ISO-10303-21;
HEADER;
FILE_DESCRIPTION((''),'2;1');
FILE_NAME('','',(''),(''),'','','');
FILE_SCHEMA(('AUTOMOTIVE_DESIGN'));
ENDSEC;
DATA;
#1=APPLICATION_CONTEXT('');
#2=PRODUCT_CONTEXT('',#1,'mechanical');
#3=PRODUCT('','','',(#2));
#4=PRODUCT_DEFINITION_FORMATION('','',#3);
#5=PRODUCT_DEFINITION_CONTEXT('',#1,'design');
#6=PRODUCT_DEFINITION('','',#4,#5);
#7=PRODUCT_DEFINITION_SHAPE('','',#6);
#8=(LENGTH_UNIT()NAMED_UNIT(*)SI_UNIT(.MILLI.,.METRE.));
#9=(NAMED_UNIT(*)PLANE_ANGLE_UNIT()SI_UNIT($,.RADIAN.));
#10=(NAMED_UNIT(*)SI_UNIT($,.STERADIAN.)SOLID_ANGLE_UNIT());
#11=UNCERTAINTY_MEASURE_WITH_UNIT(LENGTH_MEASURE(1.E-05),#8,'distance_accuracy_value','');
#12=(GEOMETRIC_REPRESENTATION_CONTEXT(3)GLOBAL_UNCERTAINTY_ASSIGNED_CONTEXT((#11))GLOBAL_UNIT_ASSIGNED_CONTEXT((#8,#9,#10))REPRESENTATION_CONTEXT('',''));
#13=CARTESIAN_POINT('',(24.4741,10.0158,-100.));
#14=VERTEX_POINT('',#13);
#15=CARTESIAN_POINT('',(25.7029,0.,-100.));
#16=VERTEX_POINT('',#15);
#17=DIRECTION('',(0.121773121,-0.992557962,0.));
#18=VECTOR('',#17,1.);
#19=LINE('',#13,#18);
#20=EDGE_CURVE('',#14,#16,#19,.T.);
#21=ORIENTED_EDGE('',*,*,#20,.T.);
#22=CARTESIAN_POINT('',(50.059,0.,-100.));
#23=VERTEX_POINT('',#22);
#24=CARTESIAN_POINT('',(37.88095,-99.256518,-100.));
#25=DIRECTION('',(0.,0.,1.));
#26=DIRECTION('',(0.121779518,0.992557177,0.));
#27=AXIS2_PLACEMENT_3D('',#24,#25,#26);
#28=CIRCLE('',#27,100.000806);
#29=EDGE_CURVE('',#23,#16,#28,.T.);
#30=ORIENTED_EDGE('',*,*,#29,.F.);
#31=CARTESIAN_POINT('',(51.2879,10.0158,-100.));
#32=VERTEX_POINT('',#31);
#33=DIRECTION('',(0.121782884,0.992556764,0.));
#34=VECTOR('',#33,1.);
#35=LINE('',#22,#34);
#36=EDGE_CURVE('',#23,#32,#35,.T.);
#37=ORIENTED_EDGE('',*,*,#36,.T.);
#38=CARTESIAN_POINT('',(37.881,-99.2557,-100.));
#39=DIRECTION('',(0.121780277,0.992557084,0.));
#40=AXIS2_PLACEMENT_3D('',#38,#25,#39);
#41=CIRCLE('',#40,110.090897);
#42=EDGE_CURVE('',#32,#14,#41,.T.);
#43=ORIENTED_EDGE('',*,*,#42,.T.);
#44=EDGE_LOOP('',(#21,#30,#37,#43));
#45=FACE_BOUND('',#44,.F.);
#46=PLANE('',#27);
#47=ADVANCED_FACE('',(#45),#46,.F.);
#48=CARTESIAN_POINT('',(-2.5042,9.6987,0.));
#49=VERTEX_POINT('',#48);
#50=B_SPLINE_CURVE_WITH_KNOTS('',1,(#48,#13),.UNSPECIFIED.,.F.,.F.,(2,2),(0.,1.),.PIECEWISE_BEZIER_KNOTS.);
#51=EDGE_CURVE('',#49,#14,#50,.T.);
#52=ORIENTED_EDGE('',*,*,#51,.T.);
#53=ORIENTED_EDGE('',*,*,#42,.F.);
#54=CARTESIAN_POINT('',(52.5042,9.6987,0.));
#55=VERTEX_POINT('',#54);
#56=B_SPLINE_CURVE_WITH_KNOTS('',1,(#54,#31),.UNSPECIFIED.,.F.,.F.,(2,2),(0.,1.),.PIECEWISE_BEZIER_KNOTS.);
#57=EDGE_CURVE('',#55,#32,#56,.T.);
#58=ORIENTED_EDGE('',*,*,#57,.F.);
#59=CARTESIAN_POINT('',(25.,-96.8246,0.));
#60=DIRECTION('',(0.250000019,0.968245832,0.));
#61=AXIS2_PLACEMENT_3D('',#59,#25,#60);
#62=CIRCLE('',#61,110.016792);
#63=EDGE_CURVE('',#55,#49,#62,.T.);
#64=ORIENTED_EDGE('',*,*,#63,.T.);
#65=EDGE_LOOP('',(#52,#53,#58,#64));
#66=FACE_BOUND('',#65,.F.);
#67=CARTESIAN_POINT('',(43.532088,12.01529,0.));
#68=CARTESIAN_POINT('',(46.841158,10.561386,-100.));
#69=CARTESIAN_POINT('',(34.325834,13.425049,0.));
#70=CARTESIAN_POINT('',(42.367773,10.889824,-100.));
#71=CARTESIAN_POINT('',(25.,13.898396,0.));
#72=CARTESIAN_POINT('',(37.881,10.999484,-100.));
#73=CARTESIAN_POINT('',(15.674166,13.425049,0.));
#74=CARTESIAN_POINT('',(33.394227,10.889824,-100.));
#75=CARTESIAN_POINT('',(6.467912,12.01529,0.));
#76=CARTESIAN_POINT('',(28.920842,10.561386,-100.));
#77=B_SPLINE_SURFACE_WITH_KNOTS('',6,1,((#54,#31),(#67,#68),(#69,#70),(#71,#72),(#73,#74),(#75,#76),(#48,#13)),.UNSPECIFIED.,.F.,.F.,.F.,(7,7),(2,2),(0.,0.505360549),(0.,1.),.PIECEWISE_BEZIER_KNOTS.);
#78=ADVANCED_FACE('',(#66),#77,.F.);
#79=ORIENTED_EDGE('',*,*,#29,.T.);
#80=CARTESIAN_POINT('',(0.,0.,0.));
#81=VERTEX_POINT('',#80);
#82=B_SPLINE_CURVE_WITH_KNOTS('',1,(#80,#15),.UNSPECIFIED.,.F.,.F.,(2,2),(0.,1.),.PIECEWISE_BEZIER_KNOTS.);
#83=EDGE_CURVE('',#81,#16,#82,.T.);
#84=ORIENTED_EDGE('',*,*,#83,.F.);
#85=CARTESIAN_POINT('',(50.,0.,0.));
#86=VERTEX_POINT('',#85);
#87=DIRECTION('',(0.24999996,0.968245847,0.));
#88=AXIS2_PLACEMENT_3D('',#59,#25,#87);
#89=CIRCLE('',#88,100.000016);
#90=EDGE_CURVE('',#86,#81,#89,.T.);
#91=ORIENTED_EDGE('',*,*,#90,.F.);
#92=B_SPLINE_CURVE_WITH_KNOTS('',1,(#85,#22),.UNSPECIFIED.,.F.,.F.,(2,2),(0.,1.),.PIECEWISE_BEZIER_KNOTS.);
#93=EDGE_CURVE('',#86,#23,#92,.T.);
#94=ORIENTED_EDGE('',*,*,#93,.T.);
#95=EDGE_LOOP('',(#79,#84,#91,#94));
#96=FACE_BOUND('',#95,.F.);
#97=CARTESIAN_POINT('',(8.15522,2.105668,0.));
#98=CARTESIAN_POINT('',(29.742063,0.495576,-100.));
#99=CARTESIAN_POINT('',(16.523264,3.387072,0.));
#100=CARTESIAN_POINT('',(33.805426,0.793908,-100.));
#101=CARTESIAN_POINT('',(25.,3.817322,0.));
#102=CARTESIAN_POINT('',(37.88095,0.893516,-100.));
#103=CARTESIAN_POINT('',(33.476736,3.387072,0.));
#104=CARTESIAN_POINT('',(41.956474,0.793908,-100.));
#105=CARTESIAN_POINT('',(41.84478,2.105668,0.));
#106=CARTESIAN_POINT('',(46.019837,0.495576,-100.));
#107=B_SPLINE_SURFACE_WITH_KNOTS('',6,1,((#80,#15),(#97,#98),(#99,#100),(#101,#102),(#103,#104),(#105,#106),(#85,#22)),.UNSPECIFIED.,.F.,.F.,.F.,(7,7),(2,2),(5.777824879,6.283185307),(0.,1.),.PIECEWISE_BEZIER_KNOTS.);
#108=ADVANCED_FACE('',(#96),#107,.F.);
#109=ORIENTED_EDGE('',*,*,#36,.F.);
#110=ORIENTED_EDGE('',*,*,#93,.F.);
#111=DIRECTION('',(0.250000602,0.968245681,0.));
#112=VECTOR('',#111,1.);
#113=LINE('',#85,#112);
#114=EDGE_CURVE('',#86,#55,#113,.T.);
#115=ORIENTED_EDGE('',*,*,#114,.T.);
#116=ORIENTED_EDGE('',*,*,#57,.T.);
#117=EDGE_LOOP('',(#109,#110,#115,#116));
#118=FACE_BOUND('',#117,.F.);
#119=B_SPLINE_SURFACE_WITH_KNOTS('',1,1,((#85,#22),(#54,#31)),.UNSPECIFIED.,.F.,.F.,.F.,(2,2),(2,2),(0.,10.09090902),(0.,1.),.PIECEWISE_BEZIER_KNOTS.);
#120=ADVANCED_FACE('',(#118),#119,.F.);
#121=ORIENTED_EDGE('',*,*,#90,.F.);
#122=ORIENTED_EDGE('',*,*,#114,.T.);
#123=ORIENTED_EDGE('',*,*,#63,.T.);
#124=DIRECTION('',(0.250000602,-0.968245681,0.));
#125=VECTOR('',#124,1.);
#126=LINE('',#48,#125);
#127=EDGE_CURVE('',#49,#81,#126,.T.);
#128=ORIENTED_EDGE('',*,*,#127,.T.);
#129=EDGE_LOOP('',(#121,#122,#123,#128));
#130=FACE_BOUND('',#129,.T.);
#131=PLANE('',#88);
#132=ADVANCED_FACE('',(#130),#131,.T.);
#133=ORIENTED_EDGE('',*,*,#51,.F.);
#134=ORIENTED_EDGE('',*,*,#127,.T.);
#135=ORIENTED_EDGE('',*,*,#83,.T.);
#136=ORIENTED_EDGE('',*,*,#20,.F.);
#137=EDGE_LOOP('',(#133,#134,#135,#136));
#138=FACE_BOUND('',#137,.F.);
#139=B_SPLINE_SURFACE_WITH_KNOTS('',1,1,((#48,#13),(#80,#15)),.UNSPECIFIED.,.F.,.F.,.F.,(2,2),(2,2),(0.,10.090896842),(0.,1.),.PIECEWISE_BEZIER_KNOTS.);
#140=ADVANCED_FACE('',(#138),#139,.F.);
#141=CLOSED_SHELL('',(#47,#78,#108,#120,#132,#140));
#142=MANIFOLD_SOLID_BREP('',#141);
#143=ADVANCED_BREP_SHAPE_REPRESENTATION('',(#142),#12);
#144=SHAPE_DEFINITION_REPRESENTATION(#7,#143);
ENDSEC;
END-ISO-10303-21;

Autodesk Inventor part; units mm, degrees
ref_plane "YZ Plane" through (0, 0, 0) normal (1, 0, 0) x (0, 1, 0)
ref_plane "XZ Plane" through (0, 0, 0) normal (0, 1, 0) x (-1, 0, 0)
sketch "Sketch1" plane through (0, 0, 0) normal (0, 0, 1) x (1, 0, 0)
  arc A0 (50, 0) -> (0, 0) centre (25, -96.8246) ccw
  arc A1 (52.5042, 9.6987) -> (-2.5042, 9.6987) centre (25, -96.8246) ccw
  line L0 (-2.5042, 9.6987) -> (0, 0)
  line L1 (50, 0) -> (52.5042, 9.6987)
ref_plane "Work Plane1" through (0, 0, -100) normal (0, 0, 1) x (1, 0, 0)
sketch "Sketch2" plane through (0, 0, -100) normal (0, 0, 1) x (1, 0, 0)
  arc A0 (50.059, 0) -> (25.7029, 0) centre (37.881, -99.2557) ccw
  arc A1 (51.2879, 10.0158) -> (24.4741, 10.0158) centre (37.881, -99.2557) ccw
  line L0 (24.4741, 10.0158) -> (25.7029, 0)
  line L1 (50.059, 0) -> (51.2879, 10.0158)
  point P0 (0, 0)
loft "Loft1" add profiles "Sketch1", "Sketch2"
surface_offset "OffsetSrf1"
properties part number "Midsurf"
